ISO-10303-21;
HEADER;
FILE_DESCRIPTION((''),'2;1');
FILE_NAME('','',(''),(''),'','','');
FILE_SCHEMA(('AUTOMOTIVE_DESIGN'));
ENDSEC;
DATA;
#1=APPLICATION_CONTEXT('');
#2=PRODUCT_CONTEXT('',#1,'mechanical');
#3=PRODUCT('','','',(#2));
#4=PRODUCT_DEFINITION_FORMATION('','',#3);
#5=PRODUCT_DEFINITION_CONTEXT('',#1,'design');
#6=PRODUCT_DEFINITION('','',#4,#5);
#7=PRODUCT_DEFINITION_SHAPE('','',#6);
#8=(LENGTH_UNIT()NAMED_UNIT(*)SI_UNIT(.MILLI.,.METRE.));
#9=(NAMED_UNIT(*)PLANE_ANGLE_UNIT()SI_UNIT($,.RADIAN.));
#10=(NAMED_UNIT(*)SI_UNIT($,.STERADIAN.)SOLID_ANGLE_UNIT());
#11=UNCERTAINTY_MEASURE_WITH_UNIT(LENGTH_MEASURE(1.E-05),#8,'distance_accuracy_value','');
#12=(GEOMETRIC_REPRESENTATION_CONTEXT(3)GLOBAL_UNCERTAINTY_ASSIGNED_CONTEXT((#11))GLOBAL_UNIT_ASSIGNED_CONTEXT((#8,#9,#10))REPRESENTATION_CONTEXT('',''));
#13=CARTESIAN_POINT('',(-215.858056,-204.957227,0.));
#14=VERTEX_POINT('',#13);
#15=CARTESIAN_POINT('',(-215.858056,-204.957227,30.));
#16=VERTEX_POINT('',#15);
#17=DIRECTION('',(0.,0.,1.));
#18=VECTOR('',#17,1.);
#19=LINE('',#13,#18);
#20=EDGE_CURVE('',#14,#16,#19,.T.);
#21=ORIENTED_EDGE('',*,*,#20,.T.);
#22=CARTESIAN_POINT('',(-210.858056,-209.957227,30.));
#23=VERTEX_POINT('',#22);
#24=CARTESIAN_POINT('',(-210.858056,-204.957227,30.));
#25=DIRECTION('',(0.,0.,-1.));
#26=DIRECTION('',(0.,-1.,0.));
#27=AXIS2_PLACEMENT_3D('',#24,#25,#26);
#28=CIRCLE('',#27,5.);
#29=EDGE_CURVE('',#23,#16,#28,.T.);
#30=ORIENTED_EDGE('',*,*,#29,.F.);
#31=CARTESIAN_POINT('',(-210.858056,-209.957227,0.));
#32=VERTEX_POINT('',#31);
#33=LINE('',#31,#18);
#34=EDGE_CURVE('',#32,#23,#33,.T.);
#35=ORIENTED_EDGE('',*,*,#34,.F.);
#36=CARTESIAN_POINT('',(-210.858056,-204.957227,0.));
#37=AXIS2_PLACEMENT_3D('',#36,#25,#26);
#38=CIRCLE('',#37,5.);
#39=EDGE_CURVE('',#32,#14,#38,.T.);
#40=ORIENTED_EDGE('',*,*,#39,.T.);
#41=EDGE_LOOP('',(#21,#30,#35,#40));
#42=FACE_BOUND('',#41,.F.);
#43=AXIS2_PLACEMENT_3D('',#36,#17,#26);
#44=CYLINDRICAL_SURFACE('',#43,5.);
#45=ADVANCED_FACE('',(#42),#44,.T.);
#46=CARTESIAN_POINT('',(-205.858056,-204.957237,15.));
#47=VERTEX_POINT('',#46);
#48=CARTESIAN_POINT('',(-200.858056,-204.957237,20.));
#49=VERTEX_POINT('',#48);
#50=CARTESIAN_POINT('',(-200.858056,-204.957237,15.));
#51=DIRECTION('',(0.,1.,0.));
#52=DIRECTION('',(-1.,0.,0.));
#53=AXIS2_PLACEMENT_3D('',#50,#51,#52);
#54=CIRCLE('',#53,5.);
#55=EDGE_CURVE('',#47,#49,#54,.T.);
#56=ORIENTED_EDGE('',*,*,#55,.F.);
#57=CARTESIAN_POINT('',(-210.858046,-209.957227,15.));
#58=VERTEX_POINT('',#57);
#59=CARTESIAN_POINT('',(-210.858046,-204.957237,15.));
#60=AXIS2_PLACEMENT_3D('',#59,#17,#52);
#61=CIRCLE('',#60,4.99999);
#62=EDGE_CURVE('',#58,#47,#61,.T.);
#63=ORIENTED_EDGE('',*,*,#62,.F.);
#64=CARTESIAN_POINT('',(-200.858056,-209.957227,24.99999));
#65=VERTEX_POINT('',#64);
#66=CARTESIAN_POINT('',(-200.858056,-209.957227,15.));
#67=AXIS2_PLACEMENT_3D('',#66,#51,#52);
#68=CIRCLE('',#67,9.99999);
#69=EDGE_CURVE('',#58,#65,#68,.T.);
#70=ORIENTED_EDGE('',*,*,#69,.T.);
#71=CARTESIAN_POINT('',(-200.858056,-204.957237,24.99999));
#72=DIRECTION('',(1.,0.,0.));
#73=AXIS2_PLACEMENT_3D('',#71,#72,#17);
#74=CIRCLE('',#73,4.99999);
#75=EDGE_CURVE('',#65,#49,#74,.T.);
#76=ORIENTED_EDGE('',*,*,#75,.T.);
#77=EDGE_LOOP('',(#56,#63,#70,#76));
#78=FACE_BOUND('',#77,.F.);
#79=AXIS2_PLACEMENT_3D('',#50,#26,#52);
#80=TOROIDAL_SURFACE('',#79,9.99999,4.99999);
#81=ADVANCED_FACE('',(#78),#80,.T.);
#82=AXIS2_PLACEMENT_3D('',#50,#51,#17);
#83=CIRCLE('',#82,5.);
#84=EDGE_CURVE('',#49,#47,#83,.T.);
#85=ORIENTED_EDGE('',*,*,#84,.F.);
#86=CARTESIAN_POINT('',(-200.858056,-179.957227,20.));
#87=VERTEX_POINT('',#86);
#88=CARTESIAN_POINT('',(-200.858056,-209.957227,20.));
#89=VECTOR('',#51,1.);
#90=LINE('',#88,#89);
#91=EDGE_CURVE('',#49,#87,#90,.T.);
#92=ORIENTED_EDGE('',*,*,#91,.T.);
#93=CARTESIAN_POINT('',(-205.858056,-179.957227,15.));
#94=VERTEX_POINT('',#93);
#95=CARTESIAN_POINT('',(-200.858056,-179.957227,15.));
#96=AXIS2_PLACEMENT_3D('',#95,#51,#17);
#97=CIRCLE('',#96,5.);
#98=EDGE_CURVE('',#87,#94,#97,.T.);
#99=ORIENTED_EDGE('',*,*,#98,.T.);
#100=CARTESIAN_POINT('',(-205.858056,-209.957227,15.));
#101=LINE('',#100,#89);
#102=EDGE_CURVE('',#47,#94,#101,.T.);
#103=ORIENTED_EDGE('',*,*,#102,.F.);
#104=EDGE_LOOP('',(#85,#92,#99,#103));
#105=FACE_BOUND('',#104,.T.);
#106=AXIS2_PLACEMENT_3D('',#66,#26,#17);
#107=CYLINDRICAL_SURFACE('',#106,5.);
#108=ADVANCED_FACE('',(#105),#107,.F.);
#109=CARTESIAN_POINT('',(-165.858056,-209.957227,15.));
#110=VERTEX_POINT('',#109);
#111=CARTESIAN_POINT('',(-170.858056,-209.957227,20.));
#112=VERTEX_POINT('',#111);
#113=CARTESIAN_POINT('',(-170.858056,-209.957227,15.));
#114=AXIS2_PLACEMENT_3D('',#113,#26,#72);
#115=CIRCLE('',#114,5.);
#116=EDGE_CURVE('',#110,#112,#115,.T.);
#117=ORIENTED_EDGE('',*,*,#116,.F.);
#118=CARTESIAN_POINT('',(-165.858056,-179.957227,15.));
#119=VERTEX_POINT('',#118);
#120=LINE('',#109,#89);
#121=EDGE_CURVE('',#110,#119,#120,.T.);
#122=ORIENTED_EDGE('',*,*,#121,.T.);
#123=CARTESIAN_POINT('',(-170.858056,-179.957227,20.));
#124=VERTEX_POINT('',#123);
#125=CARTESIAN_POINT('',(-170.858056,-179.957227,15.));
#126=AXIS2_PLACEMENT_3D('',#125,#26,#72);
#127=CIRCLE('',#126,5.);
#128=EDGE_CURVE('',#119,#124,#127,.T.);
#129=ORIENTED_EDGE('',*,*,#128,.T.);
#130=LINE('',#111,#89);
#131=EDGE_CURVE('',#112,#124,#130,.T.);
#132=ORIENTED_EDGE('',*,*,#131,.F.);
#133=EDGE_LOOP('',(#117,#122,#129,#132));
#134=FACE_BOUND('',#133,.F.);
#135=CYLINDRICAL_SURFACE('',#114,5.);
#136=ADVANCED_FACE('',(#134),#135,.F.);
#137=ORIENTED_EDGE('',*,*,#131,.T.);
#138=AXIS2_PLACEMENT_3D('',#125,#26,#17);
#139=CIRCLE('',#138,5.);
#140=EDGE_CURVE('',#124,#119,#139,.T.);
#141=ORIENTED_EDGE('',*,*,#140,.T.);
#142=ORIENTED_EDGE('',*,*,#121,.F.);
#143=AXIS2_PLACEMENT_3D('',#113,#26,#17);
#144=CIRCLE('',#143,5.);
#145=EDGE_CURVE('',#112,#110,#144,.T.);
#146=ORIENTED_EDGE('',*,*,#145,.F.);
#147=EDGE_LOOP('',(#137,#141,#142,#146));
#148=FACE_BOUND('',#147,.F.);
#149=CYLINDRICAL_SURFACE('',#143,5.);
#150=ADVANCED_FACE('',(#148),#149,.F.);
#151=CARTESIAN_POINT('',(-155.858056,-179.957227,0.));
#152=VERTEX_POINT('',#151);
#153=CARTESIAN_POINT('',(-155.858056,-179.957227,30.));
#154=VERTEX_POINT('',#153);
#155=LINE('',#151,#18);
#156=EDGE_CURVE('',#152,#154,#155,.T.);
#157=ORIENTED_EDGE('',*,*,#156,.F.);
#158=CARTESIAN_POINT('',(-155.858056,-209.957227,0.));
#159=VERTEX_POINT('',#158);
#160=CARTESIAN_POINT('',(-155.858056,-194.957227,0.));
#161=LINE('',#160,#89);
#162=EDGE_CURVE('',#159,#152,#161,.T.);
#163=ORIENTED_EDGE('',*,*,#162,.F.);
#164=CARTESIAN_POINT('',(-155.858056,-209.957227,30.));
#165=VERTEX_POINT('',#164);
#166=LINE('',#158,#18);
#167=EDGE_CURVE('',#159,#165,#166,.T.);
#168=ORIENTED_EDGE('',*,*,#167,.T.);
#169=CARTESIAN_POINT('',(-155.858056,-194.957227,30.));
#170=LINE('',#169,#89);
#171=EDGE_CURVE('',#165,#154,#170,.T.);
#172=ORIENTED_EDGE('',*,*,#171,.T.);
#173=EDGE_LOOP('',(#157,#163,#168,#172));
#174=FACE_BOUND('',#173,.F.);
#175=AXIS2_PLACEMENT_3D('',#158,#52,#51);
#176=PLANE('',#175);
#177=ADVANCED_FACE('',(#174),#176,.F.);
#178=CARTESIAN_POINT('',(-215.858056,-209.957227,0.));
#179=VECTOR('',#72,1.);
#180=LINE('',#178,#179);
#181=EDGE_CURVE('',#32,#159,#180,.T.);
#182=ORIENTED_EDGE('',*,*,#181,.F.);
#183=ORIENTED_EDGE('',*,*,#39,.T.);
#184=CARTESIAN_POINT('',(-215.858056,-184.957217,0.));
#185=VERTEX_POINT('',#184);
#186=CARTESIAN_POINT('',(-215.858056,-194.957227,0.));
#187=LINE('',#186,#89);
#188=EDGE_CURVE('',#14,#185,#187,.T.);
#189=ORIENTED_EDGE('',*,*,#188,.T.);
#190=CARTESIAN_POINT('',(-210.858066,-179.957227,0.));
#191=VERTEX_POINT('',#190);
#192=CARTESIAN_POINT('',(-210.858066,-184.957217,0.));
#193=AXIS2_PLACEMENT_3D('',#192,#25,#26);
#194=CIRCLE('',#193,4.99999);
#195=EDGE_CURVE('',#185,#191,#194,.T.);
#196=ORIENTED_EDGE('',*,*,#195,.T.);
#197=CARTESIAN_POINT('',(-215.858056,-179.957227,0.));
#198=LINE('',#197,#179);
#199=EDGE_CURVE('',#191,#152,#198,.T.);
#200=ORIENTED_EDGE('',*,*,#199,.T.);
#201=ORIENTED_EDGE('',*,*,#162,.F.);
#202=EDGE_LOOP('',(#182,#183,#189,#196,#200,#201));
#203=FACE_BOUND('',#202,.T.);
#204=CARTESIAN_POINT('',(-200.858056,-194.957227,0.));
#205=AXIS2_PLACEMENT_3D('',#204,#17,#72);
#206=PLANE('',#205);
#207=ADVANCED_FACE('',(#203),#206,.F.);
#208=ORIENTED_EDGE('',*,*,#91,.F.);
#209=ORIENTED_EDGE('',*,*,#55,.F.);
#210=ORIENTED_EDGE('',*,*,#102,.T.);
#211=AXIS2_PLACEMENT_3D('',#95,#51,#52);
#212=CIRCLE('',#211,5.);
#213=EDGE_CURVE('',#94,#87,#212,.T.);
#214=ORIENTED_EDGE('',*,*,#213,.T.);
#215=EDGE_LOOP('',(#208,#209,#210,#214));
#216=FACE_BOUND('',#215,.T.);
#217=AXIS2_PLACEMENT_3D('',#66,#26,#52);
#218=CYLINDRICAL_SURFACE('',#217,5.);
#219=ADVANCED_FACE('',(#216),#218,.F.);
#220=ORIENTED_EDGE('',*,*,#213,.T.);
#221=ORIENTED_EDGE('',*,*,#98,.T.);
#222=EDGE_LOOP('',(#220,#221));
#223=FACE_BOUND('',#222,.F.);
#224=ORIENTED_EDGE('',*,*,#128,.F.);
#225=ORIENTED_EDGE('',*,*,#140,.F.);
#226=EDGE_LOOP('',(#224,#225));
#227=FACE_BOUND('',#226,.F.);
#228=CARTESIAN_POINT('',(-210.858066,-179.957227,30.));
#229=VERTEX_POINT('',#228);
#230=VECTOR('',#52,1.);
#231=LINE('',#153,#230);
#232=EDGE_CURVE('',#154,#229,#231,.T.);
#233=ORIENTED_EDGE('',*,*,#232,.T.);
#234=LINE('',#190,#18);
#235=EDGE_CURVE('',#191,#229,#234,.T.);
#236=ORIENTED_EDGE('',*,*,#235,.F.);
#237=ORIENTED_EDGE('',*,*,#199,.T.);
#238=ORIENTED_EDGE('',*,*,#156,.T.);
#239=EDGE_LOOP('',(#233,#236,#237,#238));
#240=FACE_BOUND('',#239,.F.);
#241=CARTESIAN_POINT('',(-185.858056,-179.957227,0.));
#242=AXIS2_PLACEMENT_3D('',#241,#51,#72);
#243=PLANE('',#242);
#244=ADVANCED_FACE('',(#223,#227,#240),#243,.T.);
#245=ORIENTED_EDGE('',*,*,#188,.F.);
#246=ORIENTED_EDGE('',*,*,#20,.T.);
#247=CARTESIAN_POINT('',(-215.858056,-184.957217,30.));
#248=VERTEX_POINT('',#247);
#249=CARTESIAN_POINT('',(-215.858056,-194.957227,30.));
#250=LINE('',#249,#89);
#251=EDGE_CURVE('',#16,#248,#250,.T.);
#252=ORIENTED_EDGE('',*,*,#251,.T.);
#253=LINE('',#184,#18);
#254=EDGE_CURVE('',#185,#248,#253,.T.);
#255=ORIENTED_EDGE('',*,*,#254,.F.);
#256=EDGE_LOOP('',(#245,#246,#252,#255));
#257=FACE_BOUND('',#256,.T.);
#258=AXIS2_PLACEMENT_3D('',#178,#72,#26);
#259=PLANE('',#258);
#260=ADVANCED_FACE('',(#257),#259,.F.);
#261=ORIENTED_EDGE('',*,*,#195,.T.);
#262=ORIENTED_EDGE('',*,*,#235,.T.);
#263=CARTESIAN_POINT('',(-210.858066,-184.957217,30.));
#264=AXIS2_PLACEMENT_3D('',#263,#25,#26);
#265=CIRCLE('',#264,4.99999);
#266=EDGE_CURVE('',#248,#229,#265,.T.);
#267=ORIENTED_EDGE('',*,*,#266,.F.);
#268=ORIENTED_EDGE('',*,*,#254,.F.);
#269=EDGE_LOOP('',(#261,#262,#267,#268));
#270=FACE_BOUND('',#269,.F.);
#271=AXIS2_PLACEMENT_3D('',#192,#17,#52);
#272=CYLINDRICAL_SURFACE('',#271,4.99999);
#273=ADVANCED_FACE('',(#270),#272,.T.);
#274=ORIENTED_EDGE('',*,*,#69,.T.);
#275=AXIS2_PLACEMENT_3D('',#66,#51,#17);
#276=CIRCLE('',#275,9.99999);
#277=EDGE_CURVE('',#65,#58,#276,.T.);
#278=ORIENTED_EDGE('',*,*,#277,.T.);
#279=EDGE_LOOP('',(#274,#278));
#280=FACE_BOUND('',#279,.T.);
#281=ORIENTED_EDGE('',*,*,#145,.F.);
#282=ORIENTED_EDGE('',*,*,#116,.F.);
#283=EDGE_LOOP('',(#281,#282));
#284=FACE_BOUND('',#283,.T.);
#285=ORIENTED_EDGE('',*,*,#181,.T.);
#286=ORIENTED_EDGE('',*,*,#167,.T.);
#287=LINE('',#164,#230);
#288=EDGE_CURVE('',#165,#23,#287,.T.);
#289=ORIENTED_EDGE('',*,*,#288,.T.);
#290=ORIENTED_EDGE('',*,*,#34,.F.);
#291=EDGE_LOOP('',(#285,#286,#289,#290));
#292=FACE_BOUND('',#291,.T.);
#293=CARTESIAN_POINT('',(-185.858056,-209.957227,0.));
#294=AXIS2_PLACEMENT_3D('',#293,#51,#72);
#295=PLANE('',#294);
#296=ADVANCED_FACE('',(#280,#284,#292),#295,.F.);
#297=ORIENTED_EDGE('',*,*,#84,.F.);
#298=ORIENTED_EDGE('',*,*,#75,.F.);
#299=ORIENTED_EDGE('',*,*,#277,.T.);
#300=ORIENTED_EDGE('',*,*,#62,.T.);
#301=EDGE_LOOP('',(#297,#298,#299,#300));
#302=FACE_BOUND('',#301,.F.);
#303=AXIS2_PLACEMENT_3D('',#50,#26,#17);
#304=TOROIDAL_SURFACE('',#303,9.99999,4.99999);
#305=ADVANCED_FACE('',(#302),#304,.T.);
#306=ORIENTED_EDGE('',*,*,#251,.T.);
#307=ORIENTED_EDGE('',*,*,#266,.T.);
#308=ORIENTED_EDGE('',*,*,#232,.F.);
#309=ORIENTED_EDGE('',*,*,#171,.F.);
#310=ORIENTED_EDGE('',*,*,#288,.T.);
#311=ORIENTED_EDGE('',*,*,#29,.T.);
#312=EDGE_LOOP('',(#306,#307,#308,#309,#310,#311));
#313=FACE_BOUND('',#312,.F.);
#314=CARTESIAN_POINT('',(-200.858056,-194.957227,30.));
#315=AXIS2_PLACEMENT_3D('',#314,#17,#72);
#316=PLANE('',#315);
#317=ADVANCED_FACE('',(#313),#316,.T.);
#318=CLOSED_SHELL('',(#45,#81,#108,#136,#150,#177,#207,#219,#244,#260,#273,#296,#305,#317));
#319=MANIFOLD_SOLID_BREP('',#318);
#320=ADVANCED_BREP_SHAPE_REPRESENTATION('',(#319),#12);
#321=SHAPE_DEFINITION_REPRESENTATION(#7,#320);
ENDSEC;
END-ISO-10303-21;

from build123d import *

# Parameters (mm, degrees)
F0_W     = 30
F0_H     = 30
F1_DEPTH = 30
F3_DEPTH = 30.001
F5_R     = 5
F6_R     = 4.99999


# Not quite as in the source:
# - a fillet or chamfer is up to 0.001 mm smaller than in the source, because OpenCascade refuses the exact size


with BuildPart() as f1:
    # F0 (on Top) → F1 (new body)
    with BuildSketch(Plane.XY):
        with Locations((-170.8580559492, -194.9572271109)):
            Rectangle(F0_W, F0_H)
    extrude(amount=F1_DEPTH)

    # F2 (on face) → F3 (cut, through all)
    with BuildSketch(Plane.XZ.offset(209.9572271109)):
        with BuildLine():
            ThreePointArc((-170.8580559492, 20), (-174.3935898551, 11.4644660941), (-165.8580559492, 15))
            ThreePointArc((-165.8580559492, 15), (-167.3225220433, 18.5355339059), (-170.8580559492, 20))
        make_face()
    extrude(amount=-F3_DEPTH, mode=Mode.SUBTRACT)

    # F4: F1 across face


with BuildPart() as f1_1:
    add(f1.part)
    add(f1.part.mirror(Plane(origin=(-185.8580559492, -194.9572271109, 15), x_dir=(0, -1, 0), z_dir=(-1, 0, 0))))

    # F5
    f5_edges = [f1_1.edges().sort_by_distance(p)[0] for p in [
        (-215.858056, -209.957227, 15),
    ]]
    fillet(f5_edges, radius=F5_R)

    # F6 (radius 5 in the source; OpenCascade refuses exactly that, so slightly less here)
    f6_edges = [f1_1.edges().sort_by_distance(p)[0] for p in [
        (-215.858056, -179.957227, 15),
        (-195.858056, -209.957227, 15),
    ]]
    fillet(f6_edges, radius=F6_R)


solid = f1_1.part
